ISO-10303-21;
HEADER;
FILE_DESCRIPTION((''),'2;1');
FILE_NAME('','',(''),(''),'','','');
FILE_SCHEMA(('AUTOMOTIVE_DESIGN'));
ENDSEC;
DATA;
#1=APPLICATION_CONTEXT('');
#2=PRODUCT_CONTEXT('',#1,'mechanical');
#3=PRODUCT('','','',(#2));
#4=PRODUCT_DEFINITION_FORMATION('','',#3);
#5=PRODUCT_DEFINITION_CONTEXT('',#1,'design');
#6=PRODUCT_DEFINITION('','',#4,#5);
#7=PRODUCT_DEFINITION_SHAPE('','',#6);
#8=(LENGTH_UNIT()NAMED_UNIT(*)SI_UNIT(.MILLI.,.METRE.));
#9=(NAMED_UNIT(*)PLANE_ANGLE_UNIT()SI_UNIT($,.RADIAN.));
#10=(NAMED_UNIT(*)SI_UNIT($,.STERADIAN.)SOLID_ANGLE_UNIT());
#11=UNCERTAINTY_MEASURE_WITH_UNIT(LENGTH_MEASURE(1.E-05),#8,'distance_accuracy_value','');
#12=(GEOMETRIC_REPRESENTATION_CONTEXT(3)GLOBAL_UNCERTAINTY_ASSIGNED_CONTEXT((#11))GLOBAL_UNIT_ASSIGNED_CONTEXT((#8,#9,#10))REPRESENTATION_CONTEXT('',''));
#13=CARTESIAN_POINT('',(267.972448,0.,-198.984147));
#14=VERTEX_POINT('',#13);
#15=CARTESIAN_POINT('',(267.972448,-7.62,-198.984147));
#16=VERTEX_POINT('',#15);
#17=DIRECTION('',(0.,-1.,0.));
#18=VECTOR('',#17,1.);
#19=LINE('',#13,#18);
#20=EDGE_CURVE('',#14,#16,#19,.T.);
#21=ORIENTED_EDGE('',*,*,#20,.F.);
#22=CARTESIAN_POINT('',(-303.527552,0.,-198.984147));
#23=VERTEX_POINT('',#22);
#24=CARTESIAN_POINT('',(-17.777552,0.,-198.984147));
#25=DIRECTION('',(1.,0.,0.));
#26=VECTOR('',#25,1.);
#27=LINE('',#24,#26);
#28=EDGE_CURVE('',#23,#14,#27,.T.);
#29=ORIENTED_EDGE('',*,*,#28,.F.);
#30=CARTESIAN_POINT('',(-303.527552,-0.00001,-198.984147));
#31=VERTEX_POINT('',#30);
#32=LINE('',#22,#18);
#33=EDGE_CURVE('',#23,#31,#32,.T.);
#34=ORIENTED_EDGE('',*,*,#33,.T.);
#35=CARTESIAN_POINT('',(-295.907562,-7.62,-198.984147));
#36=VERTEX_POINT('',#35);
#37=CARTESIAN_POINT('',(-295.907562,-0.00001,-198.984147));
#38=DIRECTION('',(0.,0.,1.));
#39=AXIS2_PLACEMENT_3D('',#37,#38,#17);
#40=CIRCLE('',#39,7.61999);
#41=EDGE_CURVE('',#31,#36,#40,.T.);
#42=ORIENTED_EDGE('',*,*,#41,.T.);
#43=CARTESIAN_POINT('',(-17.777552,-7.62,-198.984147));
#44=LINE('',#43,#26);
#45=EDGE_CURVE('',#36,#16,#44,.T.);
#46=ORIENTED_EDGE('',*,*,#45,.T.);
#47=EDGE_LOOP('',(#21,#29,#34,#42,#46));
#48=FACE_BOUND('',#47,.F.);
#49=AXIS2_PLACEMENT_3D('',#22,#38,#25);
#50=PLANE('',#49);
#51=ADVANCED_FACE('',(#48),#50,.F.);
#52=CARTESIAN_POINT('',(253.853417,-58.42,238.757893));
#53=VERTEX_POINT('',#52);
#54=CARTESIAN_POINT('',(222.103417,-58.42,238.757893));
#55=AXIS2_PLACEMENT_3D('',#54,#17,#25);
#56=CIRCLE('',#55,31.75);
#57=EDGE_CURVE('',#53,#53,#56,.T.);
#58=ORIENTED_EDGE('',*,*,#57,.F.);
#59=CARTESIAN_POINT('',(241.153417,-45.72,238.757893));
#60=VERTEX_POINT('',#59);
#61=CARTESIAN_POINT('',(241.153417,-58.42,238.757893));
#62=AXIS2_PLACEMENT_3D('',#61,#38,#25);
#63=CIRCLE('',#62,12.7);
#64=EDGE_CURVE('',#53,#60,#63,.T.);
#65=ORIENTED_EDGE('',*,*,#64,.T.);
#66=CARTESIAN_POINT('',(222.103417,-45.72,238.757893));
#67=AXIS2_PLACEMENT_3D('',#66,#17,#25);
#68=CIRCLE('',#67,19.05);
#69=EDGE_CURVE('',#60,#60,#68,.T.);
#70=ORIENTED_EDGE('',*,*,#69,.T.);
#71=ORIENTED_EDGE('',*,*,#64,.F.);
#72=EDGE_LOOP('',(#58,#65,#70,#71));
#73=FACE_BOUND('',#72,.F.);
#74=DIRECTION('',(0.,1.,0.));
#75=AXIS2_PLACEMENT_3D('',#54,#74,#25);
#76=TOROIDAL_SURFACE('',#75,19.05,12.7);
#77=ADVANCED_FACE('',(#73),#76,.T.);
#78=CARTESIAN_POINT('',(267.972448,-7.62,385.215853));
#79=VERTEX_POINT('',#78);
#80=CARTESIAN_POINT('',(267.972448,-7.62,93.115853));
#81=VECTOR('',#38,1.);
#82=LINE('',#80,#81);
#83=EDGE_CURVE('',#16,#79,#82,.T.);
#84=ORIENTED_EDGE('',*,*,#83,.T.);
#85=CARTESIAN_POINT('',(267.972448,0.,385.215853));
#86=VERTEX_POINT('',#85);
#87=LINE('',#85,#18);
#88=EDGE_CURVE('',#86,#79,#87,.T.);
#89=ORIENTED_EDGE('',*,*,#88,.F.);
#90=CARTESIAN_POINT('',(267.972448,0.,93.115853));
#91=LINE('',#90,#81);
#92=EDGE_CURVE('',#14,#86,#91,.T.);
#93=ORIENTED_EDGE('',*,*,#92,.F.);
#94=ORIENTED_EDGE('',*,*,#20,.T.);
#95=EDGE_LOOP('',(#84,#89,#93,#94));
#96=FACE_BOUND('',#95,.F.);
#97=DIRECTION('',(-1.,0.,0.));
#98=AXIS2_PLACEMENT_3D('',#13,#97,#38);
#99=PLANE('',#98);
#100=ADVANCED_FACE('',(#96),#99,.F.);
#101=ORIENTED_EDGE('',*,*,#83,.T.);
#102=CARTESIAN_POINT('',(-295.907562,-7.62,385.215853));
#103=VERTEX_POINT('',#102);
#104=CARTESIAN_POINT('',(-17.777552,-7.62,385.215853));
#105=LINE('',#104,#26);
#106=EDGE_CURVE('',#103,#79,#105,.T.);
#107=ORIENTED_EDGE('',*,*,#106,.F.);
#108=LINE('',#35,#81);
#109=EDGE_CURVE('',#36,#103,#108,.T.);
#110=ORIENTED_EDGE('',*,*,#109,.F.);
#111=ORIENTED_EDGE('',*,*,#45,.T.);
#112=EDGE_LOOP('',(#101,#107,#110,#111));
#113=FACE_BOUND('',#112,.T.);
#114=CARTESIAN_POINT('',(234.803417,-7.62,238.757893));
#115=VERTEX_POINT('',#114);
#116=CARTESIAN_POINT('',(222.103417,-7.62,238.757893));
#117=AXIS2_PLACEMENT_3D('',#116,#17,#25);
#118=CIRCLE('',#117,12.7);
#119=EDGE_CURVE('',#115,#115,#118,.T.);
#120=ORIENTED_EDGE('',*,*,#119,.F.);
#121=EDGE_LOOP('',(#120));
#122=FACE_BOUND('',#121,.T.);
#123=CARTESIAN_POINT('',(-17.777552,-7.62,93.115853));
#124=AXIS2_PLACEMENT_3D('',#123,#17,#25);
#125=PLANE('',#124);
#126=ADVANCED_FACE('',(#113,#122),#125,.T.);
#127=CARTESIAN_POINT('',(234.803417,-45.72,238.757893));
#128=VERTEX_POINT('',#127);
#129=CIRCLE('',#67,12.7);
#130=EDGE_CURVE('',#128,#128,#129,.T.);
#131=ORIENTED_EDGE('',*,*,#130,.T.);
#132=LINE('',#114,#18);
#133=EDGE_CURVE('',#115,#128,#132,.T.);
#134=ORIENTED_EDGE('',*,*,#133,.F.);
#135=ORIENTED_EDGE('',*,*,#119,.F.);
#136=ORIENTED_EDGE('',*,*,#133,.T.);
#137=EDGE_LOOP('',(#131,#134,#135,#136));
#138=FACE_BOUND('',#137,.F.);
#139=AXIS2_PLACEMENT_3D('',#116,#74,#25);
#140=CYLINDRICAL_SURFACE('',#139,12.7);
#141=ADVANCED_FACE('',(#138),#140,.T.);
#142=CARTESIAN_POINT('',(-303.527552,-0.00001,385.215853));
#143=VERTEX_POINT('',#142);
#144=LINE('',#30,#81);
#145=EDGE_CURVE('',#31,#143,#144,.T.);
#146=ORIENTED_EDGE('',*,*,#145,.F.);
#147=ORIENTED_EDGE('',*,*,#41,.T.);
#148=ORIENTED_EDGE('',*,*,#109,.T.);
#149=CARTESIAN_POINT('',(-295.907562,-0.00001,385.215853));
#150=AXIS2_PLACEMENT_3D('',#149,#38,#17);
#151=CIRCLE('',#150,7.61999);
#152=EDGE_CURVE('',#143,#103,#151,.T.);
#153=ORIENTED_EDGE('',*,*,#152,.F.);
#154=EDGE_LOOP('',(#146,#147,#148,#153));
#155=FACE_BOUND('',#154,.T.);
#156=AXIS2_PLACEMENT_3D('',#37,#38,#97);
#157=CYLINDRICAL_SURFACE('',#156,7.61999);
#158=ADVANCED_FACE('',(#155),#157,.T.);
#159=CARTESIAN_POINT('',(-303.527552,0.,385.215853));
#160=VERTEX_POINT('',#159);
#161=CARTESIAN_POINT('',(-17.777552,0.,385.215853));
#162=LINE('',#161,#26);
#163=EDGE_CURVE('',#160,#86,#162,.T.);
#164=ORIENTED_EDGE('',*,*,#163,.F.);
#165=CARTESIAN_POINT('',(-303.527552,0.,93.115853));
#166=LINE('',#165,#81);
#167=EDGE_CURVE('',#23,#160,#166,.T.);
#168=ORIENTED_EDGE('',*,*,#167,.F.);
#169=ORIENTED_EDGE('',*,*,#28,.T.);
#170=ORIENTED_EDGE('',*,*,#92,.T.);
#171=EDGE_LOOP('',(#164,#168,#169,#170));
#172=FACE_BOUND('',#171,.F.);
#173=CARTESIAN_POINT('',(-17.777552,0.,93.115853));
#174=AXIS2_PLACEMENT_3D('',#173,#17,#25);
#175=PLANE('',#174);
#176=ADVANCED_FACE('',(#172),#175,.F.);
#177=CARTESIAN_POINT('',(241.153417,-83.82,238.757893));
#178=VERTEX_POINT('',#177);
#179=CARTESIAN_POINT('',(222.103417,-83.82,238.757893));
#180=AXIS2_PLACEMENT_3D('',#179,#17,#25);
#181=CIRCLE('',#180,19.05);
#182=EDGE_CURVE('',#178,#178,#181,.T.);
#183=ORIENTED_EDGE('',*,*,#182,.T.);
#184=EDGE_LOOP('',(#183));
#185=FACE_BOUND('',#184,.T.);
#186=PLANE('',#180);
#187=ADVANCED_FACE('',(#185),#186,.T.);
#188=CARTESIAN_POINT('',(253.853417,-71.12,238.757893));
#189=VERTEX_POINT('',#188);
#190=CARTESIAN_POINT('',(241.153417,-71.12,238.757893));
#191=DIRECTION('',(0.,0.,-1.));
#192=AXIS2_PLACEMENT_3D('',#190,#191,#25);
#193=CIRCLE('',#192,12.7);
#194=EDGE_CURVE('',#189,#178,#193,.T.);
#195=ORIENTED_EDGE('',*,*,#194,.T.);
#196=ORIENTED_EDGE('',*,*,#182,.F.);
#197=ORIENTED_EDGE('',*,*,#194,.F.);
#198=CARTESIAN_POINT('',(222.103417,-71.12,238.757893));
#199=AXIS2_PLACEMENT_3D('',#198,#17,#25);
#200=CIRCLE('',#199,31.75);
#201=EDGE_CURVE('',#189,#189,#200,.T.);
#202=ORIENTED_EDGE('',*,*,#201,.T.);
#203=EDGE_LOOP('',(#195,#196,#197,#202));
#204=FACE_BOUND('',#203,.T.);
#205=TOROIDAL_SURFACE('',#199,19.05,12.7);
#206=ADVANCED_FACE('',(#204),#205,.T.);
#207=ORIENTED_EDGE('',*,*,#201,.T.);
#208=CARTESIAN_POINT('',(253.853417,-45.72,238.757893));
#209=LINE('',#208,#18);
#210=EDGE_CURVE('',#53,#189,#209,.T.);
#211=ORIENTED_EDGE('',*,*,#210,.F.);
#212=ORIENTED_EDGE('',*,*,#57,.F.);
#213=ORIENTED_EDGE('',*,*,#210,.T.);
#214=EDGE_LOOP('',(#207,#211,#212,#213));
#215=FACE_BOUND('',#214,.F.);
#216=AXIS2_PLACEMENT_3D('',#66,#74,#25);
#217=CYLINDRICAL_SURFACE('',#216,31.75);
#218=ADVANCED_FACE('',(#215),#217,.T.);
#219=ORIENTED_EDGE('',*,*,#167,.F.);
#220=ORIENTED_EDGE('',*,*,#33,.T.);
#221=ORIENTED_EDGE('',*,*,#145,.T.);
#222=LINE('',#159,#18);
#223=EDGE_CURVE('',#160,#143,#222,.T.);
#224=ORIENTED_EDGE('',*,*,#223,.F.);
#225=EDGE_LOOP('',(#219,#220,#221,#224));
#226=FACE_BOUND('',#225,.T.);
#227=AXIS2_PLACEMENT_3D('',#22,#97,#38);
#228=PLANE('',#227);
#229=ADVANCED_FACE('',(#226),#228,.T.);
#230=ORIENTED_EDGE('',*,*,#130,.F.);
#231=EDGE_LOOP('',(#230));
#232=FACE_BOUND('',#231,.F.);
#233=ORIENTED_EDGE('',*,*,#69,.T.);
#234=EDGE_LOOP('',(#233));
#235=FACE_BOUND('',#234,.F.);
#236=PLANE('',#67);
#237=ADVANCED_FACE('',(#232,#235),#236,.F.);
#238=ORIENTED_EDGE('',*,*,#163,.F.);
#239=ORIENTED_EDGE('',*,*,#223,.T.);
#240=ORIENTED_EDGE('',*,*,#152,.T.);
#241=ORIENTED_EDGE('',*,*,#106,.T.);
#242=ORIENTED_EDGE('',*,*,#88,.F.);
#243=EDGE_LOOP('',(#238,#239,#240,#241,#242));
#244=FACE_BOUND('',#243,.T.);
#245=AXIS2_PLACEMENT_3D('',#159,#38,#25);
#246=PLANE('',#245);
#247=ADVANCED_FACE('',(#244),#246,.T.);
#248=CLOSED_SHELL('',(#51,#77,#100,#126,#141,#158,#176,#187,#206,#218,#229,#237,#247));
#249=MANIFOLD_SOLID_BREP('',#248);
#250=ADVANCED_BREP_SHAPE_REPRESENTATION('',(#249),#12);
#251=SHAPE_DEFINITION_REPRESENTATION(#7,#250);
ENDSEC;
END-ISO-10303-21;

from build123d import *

# Parameters (mm, degrees)
F0_W     = 571.5
F0_H     = 584.2
F1_DEPTH = 7.62
F2_R     = 7.61999
F3_R     = 12.7
F4_DEPTH = 38.1
F5_R     = 31.75
F5_R_2   = 12.7
F6_DEPTH = 38.1
F7_R     = 12.7


# Not quite as in the source:
# - a fillet or chamfer is up to 0.001 mm smaller than in the source, because OpenCascade refuses the exact size


with BuildPart() as f1:
    # F0 (on Front) → F1 (new body)
    with BuildSketch(Plane.XZ):
        with Locations((-17.7775520504, 93.1158526728)):
            Rectangle(F0_W, F0_H)
    extrude(amount=F1_DEPTH)

    # F2 (radius 7.62 in the source; OpenCascade refuses exactly that, so slightly less here)
    f2_edges = [f1.edges().sort_by_distance(p)[0] for p in [
        (-303.527552, -7.62, 93.115853),
    ]]
    fillet(f2_edges, radius=F2_R)

    # F3 (on face) → F4 (join)
    with BuildSketch(Plane.XZ.offset(7.62)):
        with Locations((222.1034169197, 238.7578934431)):
            Circle(F3_R)
    extrude(amount=F4_DEPTH)

    # F5 (on face) → F6 (join)
    with BuildSketch(Plane.XZ.offset(45.72)):
        with Locations((222.1034169197, 238.7578934431)):
            Circle(F5_R)
        with Locations((222.1034169197, 238.7578934431)):
            Circle(F5_R_2, mode=Mode.SUBTRACT)
        with Locations((222.1034169197, 238.7578934431)):
            Circle(F5_R_2)
    extrude(amount=F6_DEPTH)

    # F7
    f7_edges = [f1.edges().sort_by_distance(p)[0] for p in [
        (190.353417, -83.82, 238.757893),
        (190.353417, -45.72, 238.757893),
    ]]
    fillet(f7_edges, radius=F7_R)


solid = f1.part
